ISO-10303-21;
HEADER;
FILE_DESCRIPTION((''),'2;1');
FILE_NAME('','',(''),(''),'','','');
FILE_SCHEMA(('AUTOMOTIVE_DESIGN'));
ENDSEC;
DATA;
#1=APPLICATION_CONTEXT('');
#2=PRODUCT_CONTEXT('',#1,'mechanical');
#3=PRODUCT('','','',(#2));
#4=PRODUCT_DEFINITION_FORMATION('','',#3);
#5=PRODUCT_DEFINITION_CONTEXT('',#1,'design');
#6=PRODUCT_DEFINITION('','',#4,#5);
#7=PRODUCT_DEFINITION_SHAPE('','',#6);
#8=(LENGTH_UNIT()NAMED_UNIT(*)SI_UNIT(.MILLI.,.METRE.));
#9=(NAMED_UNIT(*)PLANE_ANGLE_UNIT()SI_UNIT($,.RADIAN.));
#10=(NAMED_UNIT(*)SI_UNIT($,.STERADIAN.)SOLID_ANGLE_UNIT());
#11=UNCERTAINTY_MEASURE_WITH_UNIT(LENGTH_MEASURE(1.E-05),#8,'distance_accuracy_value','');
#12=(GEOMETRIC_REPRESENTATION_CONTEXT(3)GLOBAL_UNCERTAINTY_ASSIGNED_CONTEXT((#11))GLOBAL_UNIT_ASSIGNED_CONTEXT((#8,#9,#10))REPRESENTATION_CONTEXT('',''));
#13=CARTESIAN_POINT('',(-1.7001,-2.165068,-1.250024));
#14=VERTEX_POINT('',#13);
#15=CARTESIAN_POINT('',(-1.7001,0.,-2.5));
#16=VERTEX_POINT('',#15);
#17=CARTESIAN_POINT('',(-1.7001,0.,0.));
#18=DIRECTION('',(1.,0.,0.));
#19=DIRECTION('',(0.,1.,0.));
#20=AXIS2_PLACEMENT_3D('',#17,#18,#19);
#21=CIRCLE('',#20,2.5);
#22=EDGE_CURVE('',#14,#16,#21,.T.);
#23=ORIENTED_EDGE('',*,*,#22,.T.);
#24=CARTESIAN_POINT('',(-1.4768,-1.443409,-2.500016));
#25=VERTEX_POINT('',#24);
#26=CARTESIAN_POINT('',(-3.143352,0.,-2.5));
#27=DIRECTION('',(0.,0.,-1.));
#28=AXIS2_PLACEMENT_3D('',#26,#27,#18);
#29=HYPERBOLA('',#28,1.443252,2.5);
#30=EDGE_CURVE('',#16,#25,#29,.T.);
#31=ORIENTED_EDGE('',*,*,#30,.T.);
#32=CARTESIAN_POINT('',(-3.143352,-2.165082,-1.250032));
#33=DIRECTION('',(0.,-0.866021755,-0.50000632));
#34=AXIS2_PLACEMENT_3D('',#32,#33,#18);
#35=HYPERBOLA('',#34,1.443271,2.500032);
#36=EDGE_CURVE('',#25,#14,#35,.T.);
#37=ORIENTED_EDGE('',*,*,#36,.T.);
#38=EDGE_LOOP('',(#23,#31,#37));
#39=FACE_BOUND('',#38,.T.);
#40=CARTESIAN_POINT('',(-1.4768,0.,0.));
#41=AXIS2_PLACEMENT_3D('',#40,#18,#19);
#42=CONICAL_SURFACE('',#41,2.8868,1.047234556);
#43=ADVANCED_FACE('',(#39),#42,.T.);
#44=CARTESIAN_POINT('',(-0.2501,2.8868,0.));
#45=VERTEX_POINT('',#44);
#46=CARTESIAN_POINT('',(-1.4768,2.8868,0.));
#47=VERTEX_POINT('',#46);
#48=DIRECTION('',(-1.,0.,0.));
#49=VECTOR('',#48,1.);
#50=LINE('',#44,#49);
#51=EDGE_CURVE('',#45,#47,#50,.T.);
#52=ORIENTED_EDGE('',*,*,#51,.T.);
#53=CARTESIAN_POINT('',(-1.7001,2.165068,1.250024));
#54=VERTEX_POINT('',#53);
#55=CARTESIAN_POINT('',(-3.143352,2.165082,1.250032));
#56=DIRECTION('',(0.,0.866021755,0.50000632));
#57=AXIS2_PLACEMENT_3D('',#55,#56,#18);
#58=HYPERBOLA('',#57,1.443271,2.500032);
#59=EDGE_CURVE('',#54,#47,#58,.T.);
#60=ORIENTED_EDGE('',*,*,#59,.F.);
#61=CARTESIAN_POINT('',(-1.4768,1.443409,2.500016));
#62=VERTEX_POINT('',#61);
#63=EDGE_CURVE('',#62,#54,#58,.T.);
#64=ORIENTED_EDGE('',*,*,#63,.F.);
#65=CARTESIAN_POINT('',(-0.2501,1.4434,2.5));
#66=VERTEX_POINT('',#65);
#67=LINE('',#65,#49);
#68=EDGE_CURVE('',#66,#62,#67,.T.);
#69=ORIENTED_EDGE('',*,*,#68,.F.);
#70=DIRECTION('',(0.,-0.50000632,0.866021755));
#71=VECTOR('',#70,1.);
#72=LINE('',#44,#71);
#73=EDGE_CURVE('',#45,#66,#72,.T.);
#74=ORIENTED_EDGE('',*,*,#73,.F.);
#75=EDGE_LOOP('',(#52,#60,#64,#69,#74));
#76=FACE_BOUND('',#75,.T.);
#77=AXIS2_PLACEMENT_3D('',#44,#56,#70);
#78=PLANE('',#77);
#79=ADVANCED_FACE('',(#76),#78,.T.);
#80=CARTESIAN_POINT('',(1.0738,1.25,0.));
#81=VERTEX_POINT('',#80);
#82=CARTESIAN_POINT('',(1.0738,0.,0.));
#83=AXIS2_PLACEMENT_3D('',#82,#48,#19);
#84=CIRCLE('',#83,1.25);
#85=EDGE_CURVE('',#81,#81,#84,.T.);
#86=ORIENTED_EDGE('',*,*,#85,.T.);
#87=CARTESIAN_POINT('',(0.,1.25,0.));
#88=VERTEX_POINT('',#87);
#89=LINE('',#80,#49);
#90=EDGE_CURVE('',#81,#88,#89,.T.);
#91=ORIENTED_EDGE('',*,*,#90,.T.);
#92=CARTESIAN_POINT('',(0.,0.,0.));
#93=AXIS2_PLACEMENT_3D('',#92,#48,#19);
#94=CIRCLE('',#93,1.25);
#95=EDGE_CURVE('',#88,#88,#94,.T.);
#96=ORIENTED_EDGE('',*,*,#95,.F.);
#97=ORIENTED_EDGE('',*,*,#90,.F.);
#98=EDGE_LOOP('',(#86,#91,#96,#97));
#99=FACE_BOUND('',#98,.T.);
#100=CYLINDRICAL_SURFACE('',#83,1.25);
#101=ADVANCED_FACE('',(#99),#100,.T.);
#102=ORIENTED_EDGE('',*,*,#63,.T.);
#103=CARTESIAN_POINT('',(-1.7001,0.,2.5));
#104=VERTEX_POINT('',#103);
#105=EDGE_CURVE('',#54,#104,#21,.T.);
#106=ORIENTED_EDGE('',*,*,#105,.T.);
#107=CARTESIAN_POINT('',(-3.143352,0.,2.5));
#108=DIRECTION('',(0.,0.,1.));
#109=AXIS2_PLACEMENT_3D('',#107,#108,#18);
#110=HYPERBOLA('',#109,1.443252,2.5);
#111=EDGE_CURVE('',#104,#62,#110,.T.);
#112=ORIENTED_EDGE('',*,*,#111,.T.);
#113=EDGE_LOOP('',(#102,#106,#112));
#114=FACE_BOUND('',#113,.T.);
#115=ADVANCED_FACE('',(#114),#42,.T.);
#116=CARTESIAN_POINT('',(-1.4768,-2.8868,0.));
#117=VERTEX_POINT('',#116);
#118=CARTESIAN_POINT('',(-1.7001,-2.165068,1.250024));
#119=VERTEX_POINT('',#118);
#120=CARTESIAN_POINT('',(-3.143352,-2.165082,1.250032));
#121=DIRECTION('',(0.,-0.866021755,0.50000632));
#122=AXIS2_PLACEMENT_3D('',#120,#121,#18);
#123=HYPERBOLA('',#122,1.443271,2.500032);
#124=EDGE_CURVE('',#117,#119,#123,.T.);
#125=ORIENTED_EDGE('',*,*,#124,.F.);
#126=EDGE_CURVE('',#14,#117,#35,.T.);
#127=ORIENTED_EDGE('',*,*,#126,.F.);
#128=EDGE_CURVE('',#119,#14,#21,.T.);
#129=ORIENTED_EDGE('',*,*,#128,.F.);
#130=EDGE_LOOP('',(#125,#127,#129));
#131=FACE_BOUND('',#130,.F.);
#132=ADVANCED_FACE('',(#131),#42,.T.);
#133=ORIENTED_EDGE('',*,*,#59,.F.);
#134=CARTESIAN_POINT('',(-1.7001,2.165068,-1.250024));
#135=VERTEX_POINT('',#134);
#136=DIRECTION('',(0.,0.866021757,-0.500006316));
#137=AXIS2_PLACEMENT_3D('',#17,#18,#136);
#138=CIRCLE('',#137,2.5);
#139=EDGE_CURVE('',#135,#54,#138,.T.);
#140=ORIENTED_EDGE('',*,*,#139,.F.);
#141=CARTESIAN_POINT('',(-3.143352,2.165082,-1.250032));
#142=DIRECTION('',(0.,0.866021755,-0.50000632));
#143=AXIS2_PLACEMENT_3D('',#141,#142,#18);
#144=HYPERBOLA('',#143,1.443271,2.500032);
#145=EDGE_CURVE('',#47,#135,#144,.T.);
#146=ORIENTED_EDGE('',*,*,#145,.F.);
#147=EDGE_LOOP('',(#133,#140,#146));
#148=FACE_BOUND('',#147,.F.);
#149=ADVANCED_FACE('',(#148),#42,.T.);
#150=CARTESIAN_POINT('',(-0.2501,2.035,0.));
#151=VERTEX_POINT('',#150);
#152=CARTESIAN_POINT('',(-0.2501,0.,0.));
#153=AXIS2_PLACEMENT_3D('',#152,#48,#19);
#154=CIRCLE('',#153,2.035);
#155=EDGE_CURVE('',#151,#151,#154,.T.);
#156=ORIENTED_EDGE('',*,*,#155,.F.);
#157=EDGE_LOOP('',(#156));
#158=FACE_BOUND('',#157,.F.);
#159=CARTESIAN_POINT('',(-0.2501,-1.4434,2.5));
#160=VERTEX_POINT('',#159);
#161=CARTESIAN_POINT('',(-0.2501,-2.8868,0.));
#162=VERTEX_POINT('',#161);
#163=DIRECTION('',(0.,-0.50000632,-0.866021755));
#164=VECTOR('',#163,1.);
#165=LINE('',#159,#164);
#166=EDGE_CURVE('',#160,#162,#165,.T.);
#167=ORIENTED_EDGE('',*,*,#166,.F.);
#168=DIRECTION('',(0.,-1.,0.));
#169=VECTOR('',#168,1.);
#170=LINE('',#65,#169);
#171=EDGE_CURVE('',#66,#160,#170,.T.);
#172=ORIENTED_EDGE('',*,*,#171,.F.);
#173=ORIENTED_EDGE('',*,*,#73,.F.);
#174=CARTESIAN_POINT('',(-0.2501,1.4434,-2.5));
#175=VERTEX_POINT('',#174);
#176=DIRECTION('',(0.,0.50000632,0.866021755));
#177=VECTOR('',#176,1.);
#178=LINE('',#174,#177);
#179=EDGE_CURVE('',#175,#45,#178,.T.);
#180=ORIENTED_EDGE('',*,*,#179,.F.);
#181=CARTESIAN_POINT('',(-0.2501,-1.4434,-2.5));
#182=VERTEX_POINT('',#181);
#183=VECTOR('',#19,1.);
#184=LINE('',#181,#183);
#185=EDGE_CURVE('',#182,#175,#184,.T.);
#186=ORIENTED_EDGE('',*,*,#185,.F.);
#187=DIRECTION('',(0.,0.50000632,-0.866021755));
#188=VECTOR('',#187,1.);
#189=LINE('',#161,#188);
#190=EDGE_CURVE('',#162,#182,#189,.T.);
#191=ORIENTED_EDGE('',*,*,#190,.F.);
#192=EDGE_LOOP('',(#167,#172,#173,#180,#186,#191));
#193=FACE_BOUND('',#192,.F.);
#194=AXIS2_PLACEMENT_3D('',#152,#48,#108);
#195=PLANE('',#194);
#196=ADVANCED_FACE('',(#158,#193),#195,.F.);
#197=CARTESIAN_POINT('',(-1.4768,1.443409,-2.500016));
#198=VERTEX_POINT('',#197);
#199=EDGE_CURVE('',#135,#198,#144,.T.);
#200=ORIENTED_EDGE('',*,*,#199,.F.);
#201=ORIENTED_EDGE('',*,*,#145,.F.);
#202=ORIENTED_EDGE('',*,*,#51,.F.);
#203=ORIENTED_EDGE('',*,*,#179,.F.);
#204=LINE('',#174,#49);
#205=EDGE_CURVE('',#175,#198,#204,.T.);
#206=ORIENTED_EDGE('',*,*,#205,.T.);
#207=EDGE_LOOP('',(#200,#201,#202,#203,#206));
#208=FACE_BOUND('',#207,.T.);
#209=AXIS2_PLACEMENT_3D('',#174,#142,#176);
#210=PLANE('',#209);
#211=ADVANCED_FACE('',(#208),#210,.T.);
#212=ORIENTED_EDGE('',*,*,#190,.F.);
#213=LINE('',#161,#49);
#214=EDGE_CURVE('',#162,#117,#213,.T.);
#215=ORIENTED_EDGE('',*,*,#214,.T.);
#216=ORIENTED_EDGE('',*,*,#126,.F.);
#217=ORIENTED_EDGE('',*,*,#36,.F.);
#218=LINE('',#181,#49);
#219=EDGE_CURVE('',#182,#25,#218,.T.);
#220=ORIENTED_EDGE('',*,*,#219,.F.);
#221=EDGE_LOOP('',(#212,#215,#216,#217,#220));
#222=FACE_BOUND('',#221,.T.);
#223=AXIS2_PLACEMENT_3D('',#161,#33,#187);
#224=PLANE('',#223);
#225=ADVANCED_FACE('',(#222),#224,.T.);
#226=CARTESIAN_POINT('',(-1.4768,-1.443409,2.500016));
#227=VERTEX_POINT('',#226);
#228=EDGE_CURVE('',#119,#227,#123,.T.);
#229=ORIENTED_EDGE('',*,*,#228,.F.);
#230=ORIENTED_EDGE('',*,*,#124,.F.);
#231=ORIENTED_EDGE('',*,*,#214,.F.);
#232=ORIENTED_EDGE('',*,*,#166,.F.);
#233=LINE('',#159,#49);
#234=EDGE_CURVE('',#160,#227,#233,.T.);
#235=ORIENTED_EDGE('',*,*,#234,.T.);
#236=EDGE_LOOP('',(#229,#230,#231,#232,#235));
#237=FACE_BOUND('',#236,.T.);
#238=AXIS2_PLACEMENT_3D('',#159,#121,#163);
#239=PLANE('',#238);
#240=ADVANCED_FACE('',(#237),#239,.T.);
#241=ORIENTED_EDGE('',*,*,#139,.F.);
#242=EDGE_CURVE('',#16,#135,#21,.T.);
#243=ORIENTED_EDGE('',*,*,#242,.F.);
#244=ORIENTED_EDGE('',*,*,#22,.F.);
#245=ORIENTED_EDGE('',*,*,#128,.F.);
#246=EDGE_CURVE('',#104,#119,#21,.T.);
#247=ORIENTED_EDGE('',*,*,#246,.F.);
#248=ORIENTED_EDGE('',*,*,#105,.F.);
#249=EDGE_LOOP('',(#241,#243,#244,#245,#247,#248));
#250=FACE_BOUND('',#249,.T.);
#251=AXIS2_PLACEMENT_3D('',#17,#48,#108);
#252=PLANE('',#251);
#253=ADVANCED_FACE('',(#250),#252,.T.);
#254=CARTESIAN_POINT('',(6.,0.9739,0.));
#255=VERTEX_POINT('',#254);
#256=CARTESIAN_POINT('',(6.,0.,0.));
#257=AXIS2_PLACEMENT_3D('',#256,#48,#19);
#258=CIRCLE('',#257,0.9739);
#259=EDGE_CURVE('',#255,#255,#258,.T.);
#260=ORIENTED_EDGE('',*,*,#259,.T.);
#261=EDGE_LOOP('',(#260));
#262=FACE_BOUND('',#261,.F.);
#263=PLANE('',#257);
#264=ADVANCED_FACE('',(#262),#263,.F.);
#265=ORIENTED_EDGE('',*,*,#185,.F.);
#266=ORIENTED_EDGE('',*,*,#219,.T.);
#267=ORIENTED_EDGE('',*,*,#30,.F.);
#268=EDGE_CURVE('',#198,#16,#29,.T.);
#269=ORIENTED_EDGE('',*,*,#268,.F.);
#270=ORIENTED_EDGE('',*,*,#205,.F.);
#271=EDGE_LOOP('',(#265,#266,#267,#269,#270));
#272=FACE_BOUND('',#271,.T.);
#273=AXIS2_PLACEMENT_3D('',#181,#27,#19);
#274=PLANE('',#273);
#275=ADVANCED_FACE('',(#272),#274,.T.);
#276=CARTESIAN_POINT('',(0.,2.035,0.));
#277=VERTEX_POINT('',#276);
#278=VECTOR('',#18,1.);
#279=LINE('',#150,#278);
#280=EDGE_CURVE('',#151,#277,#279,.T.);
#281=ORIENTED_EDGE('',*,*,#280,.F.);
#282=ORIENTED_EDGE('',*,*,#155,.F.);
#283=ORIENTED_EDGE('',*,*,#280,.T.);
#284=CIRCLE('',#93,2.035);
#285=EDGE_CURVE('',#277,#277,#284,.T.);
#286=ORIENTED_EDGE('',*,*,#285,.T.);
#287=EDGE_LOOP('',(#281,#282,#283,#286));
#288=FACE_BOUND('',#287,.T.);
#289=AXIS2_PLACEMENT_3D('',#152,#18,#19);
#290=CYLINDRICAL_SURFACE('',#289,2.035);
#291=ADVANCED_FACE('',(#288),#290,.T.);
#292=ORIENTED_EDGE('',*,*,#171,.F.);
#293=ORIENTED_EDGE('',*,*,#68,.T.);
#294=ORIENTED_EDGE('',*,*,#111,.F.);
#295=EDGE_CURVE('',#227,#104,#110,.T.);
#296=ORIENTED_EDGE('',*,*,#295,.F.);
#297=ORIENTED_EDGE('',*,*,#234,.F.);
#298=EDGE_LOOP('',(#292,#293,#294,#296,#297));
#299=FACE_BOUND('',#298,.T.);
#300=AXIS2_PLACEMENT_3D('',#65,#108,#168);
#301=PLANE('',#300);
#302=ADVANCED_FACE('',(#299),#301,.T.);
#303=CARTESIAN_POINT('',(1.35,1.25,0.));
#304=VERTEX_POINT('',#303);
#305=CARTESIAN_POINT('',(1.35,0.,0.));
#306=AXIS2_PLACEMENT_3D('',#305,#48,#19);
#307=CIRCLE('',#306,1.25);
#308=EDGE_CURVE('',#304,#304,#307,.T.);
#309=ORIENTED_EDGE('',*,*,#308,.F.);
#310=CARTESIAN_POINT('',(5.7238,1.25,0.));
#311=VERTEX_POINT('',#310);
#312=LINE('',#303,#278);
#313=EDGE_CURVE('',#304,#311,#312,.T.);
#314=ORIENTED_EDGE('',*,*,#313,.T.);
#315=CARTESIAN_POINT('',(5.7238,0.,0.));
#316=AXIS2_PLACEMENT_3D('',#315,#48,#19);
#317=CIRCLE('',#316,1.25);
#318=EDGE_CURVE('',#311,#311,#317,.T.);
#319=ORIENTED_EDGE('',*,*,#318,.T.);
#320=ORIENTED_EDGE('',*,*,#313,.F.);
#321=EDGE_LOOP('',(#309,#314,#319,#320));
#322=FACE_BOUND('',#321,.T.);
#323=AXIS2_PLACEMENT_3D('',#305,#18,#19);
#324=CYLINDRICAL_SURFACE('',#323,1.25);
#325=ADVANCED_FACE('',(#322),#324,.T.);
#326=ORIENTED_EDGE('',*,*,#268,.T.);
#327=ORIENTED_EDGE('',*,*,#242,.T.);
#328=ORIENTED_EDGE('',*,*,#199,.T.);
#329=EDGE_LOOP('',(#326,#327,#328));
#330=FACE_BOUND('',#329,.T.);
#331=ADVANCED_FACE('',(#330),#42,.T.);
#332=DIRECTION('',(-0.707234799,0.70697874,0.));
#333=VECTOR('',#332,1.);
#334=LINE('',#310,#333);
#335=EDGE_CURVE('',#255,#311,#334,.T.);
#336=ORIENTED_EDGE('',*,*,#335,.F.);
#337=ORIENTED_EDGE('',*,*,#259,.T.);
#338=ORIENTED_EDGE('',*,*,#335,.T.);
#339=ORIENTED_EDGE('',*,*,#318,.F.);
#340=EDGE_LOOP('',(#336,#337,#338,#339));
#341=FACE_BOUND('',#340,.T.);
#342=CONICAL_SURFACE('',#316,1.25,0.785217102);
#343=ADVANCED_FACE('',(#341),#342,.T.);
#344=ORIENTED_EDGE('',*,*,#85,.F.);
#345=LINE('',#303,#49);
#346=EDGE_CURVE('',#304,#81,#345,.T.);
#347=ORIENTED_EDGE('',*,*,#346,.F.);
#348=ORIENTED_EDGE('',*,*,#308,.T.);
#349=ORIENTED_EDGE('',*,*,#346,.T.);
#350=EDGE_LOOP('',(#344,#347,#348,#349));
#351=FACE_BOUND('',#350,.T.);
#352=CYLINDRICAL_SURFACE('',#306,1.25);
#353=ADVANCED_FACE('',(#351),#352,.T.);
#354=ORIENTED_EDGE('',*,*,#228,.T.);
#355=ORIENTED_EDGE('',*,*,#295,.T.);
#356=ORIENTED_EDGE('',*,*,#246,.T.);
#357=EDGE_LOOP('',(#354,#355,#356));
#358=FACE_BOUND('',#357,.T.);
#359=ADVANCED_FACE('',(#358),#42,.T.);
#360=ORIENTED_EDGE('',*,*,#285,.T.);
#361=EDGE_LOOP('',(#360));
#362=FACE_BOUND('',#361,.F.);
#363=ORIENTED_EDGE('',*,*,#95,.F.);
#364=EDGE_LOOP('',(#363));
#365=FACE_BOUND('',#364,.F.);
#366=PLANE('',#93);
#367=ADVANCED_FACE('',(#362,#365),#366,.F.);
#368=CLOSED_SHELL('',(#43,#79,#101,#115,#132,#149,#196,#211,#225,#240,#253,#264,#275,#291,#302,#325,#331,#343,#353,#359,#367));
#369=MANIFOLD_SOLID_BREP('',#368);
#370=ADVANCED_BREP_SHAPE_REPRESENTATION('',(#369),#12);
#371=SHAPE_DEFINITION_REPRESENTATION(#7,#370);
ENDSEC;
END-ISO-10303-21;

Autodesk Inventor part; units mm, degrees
ref_plane "YZ Plane" through (0, 0, 0) normal (1, 0, 0) x (0, 1, 0)
ref_plane "XZ Plane" through (0, 0, 0) normal (0, 1, 0) x (-1, 0, 0)
sketch "Boceto1" plane through (0, 0, 0) normal (0, 0, 1) x (1, 0, 0)
  line L0 (0, 2.035) -> (0, 1.25)
  line L1 (1.35, 1.25) -> (6, 1.25)
  line L2 (6, 1.25) -> (6, 0)
  line L3 (6, 0) -> (-0.2501, 0)
  line L4 (-1.5001, 0) -> (7.25, 0) projected
  line L5 (-0.2501, 0) -> (-0.2501, 2.035)
  line L6 (-0.2501, 2.035) -> (0, 2.035)
  line L7 (1.35, 1.25) -> (1.0738, 1.25)
  line L8 (1.0738, 1.25) -> (0, 1.25)
  line L9 (0, -0.407) -> (0, 2.442) projected
  dimension "d0" = 6
  dimension "d1" = 4.65
  dimension "d2" = 2.5
  dimension "d9" = 0.2501
  dimension "d10" = 4.07
  dimension "d13" = 0.2762
  dimension "d14" = 2.5
revolve "Cuerpo" add sketch "Boceto1" angle 360 about axis through (6, 0, 0) along (-1, 0, 0)
sketch "Boceto2" plane through (-0.2501, 0, 0) normal (-1, 0, 0) x (0, 0, 1)
  line L0 (0, 2.8868) -> (2.5, 1.4434)
  line L1 (2.5, 1.4434) -> (2.5, -1.4434)
  line L2 (2.5, -1.4434) -> (0, -2.8868)
  line L3 (0, -2.8868) -> (-2.5, -1.4434)
  line L4 (-2.5, -1.4434) -> (-2.5, 1.4434)
  line L5 (-2.5, 1.4434) -> (0, 2.8868)
  point P0 (0, 0)
  point P1 (0, 0)
  dimension "d11" = 5
extrude "Cabeza" add sketch "Boceto2" along normal blind 1.45
sketch "Boceto4" plane through (0, 0, 0) normal (0, 0, 1) x (1, 0, 0)
  line L0 (-1.7001, 2.5) -> (-1.7001, 2.8868)
  line L1 (-1.7001, 2.8868) -> (-1.4768, 2.8868)
  line L2 (-1.4768, 2.8868) -> (-1.7001, 2.5)
  line L3 (-1.9901, 0) -> (0.0399, 0) projected
  line L4 (-0.2501, 2.8868) -> (-1.7001, 2.8868) projected
  line L5 (-1.7001, 1.4434) -> (-1.7001, 2.8868) projected
  dimension "d5" = 30
  dimension "d19" = 5
revolve "Chaflán1" cut sketch "Boceto4" angle 360 about axis through (-10, 0, 0) along (1, 0, 0)
thread "Rosca" size "M2.5x0.45" class "6g" standard "ISO Metric profile" length 4.65
chamfer "Chaflán2" distance 0.2761 distance2 0.2762 1 edges at (6, -1.25, 0) measured on face at (6, -0.3871, 0.3429)
ref_plane "Work Plane1" through (1.525, 0, 0) normal (0, 0, 1) x (1, 0, 0)
equation "\"d11\" = SW"
equation "\"d3\" = KOH - SD"
equation "\"d15\" = GEL"
equation "\"d6\" = -0.5 * SPD + 0.5 * GD"
equation "\"d0\" = NLG"
equation "\"d1\" = GEL"
equation "\"d2\" = GD"
equation "\"d10\" = SD2"
equation "\"d14\" = BDM"
equation "\"d5\" = ANG1"
equation "\"d19\" = SW0"
equation "\"NLG\" = 6"
equation "\"GD\" = NND"
equation "\"BDM\" = NND"
equation "\"KOH\" = 1.7"
equation "\"GEL\" = 4.65"
equation "\"SW\" = 5"
equation "\"SW0\" = SW"
equation "\"SPD\" = NND - 1.2269 * PTC"
equation "\"SD2\" = 4.07"
equation "\"SD\" = 0.25"
equation "\"ANG1\" = 30deg"
equation "\"GAL\" = 0.61345 * PTC"
equation "\"GUL\" = 0.61345 * PTC"
equation "\"RR\" = 0.1"
equation "\"GD1\" = THREADDIA - 1.2269 * PTC"
equation "\"THREADDIA\" = 2.5"
equation "\"SDH\" = SD2"
equation "\"SDHG\" = 1.35"
equation "\"TOA\" = 30deg"
equation "\"PTC\" = 0.45"
equation "\"NND\" = 2.5"
equation "\"E0\" = 5.775"
properties part number "ISO 4017 - M2.5 x 6" material "Acero inoxidable, 440C"
